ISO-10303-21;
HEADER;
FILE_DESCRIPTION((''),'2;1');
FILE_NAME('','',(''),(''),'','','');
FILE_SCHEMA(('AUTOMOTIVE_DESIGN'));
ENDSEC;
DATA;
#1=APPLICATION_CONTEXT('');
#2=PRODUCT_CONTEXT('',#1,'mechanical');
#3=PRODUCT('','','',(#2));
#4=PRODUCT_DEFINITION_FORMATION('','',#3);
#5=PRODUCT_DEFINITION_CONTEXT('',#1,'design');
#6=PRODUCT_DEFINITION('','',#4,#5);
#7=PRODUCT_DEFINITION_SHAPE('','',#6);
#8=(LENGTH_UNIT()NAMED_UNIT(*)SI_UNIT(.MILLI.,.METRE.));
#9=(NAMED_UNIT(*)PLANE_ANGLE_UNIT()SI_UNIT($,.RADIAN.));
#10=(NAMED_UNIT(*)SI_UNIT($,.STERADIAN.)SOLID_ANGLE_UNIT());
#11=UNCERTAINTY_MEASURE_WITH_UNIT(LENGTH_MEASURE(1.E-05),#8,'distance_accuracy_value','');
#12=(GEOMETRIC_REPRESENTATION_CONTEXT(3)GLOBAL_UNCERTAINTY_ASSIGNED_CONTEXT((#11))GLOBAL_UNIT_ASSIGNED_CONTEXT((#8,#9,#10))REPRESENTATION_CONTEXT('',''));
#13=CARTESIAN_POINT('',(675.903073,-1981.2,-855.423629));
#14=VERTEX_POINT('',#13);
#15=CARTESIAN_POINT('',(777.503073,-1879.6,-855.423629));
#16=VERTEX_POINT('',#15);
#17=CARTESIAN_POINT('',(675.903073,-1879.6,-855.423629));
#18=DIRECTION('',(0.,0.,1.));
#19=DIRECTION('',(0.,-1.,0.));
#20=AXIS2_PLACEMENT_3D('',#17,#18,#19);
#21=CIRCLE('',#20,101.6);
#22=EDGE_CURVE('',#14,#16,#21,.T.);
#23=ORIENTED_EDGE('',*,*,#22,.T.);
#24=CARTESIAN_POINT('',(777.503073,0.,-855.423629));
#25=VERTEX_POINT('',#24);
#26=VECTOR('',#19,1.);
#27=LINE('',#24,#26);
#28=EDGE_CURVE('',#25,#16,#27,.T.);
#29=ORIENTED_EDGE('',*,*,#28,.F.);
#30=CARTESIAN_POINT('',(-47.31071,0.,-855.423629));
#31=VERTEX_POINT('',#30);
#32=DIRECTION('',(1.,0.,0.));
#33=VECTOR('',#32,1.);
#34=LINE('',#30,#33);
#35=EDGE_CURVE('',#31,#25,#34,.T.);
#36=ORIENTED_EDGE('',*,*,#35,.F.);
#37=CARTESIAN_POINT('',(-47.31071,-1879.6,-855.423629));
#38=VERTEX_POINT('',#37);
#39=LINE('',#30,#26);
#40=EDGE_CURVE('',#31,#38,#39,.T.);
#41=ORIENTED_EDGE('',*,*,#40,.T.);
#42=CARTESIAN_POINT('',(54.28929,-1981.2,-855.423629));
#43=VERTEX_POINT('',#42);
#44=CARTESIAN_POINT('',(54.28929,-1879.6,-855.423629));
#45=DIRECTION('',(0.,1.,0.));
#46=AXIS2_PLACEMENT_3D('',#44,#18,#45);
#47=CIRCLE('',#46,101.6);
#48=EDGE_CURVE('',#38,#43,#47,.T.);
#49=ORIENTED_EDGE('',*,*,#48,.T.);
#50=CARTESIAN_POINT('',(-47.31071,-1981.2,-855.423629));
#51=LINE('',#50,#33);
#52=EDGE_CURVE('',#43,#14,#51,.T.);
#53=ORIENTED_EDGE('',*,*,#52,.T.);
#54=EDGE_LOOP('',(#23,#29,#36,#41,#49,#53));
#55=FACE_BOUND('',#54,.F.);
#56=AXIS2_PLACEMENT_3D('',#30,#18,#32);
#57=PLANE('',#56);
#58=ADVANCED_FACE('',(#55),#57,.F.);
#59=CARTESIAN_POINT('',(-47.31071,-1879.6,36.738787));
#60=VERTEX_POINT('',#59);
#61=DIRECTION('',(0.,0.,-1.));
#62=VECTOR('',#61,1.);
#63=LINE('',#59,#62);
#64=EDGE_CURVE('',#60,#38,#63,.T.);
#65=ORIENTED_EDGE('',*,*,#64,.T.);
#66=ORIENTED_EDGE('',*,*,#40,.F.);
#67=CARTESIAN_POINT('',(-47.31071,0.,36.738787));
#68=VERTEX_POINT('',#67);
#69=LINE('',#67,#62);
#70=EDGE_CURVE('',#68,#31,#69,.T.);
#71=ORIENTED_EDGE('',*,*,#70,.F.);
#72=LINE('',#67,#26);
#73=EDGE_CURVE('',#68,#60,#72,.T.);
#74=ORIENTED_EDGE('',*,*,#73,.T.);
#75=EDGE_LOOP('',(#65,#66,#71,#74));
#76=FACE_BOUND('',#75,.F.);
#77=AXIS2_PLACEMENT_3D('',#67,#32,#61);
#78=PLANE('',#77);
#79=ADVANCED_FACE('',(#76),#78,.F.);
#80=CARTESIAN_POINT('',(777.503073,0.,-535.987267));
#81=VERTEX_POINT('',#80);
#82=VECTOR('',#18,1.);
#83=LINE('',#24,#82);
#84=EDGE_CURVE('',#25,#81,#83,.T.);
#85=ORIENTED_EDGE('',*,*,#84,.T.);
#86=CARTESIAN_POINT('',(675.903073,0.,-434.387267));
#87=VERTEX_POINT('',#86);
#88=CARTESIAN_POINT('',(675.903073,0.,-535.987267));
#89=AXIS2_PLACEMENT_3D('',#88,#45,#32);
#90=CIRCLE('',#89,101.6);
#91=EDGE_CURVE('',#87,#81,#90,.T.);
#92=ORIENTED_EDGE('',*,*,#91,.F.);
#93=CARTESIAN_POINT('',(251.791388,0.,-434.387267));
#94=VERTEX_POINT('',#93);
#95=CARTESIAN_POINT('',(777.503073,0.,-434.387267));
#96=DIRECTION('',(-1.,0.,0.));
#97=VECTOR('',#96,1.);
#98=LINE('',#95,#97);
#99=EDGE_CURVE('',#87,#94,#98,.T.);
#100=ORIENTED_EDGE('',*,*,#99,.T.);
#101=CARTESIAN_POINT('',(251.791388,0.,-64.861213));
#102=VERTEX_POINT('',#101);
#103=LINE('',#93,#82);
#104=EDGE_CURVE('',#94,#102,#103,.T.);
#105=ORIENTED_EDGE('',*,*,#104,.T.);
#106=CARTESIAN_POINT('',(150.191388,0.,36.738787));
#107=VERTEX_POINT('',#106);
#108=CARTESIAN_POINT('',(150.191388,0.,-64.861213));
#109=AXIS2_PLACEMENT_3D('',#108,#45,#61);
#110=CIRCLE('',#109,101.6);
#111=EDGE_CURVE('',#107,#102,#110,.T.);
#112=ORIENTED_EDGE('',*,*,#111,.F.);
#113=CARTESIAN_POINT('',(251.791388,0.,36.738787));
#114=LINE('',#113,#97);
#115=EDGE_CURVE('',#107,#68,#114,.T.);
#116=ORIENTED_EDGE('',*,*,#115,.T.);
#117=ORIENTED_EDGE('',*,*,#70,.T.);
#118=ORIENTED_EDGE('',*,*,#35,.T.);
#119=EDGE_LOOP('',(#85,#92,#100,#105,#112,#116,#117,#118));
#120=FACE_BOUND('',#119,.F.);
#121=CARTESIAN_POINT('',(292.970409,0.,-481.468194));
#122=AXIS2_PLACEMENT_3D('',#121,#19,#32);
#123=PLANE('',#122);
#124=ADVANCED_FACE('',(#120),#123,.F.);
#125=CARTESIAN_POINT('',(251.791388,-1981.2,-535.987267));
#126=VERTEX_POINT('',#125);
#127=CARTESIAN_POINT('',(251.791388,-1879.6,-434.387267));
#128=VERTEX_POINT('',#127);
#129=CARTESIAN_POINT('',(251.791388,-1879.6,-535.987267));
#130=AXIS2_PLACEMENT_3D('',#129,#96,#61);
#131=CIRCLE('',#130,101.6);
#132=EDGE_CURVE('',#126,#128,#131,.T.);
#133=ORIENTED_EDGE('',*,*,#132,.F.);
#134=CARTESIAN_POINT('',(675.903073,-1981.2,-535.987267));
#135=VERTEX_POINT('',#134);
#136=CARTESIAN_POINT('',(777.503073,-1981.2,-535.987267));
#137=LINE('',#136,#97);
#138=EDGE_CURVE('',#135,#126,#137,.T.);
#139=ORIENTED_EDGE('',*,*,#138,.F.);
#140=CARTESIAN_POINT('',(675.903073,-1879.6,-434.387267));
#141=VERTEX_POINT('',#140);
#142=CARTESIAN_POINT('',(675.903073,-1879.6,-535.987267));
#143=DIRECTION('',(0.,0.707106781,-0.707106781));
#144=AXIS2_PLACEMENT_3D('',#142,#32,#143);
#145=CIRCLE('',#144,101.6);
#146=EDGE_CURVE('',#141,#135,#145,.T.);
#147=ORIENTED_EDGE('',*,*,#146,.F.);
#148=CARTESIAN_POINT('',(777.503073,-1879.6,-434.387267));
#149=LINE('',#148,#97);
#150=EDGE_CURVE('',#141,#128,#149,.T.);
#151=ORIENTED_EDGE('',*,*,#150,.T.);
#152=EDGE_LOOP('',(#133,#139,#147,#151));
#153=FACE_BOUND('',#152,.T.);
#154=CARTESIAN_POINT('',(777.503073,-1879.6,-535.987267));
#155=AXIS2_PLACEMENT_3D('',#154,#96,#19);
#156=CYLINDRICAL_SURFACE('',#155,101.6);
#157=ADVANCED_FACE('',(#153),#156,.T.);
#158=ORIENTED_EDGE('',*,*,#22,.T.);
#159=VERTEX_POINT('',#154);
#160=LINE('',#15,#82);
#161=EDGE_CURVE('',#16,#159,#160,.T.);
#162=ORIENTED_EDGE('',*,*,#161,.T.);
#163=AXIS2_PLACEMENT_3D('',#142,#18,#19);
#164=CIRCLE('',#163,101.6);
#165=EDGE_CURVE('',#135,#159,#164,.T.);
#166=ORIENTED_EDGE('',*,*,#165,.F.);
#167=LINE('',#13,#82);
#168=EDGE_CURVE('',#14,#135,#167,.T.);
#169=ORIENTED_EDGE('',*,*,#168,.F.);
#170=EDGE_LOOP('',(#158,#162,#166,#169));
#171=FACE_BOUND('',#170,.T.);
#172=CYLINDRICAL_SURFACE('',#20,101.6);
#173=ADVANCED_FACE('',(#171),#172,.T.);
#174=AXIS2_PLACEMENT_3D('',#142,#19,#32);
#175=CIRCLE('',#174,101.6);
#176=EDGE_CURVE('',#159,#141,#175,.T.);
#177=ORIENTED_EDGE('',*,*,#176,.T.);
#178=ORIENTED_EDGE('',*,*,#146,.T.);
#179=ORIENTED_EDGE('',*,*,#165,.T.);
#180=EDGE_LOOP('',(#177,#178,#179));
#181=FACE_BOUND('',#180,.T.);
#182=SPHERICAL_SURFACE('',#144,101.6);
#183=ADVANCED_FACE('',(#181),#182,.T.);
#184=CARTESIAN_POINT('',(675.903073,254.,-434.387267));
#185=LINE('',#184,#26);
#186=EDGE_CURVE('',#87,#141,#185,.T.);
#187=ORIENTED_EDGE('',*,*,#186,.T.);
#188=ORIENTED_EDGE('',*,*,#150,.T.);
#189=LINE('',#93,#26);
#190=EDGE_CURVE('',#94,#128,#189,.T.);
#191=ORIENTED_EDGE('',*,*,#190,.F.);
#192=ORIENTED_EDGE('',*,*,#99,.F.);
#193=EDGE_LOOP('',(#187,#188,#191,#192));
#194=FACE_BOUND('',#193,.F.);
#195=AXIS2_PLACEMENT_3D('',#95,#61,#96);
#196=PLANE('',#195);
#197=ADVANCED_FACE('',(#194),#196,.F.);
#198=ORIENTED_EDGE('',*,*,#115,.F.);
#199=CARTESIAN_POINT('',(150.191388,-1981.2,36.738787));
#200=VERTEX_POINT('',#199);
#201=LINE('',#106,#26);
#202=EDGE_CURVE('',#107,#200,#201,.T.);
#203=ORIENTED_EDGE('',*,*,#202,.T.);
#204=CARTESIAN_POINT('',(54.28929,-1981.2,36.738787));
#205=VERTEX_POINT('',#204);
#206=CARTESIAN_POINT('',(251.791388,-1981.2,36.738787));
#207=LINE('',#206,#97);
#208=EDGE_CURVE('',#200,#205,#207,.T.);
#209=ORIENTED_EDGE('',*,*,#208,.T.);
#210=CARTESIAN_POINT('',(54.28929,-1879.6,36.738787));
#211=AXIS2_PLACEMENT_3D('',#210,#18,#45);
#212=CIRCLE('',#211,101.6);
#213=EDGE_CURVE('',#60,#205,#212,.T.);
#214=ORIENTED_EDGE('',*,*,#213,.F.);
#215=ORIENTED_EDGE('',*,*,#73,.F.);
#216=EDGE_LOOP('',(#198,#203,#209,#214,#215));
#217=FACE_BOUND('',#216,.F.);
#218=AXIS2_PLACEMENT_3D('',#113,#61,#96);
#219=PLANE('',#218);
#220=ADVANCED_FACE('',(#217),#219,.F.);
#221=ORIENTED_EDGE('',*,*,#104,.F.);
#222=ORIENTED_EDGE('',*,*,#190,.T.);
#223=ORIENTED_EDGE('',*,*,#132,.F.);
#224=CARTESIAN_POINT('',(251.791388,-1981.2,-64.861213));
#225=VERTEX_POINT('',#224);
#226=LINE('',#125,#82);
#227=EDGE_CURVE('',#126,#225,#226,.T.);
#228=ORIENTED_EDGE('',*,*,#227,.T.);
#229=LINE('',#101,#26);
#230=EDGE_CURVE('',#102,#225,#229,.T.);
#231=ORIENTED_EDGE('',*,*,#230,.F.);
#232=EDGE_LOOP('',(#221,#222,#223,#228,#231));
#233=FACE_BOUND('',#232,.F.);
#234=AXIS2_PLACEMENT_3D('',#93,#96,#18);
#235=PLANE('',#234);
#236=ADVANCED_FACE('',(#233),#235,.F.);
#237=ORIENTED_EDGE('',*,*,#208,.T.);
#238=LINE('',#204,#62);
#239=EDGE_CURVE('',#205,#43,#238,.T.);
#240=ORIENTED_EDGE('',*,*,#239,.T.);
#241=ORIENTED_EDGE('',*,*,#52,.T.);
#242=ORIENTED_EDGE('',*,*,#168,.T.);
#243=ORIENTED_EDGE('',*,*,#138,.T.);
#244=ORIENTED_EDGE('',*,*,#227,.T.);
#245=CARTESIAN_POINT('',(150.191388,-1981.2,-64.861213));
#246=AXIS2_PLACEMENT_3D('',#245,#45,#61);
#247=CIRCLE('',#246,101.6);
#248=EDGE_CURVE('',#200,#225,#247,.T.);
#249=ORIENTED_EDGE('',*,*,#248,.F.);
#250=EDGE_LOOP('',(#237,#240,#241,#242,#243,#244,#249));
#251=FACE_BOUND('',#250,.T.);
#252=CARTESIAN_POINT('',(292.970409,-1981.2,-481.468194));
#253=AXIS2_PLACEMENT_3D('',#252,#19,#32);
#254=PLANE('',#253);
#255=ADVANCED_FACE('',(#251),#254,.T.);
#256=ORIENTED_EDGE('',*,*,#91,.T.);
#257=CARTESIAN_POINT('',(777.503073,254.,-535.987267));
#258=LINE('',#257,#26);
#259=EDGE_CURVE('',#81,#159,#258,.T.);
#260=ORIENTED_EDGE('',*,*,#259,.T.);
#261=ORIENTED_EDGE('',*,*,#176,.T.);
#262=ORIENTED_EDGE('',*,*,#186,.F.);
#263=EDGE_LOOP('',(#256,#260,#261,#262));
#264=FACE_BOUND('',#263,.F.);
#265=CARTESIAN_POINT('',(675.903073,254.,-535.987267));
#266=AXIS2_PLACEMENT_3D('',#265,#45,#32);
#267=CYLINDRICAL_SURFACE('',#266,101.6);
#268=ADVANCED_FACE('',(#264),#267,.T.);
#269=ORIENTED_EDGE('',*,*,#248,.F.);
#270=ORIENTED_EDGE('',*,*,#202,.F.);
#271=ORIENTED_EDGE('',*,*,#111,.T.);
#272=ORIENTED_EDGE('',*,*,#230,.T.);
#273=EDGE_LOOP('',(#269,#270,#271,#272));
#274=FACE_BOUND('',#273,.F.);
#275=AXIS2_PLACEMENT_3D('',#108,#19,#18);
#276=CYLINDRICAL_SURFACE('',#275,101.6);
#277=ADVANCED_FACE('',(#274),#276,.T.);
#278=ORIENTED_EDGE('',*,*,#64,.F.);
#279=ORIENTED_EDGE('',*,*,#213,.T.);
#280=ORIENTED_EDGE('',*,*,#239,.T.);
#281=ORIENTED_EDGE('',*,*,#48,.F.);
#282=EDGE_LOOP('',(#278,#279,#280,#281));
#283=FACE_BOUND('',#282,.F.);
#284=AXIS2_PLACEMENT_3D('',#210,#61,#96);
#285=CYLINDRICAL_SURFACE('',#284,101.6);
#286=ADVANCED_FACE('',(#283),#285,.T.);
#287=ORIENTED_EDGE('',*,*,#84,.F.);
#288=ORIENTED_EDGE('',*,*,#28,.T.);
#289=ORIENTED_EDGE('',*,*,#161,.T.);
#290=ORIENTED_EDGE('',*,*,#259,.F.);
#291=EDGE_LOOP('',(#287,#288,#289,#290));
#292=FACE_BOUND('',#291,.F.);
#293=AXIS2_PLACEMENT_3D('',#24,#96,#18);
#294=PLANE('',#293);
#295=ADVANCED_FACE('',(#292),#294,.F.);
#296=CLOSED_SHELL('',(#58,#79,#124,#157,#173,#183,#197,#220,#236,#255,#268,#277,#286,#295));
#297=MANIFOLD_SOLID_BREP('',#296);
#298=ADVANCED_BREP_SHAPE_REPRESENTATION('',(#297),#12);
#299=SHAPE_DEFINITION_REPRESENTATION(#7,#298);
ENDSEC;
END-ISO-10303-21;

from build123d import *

# Parameters (mm, degrees)
F1_DEPTH    = 1981.2
F2_R        = 101.6
F3_R        = 101.6
F4_T1_DEPTH = 2133.6
F4_S5_W     = 101.6
F4_S5_H     = 101.6
F4_T6_DEPTH = 101.6


# Not quite as in the source:
# - a fillet or chamfer that OpenCascade refuses, or shapes differently, is made with other operations: its cross-section is extruded or revolved along the edge and cut away or added


with BuildPart() as f1:
    # F0 (on Front) → F1 (new body)
    with BuildSketch(Plane.XZ):
        Polygon((251.7913877964, 36.7387868464), (-47.3107099533, 36.7387868464), (-47.3107099533, -855.4236292839), (777.5030732155, -855.4236292839), (777.5030732155, -434.3872666359), (251.7913877964, -434.3872666359), align=None)
    extrude(amount=F1_DEPTH)

    # F2
    f2_edges = [f1.edges().sort_by_distance(p)[0] for p in [
        (251.791388, -990.6, 36.738787),
        (-47.31071, -1981.2, -409.342421),
    ]]
    fillet(f2_edges, radius=F2_R)

    # F3
    f3_edges = [f1.edges().sort_by_distance(p)[0] for p in [
        (514.647231, -1981.2, -434.387267),
        (777.503073, -1981.2, -644.905448),
    ]]
    fillet(f3_edges, radius=F3_R)

    # F4: fillet of radius 101.6 on 1 edges, made by hand

    # F4_s2 → F4_t1 (cut)
    with BuildSketch(Plane.XZ.offset(-254)):
        with BuildLine():
            ThreePointArc((777.5030732155, -535.9872666359), (747.745122184, -464.1452176673), (675.9030732155, -434.3872666359))
            Line((675.9030732155, -434.3872666359), (777.5030732155, -434.3872666359))
            Line((777.5030732155, -434.3872666359), (777.5030732155, -535.9872666359))
        make_face()
    extrude(amount=F4_T1_DEPTH, mode=Mode.SUBTRACT)


with BuildPart() as f4_tool4:
    # F4_s5 → F4_t6 (new body)
    with BuildSketch(Plane.YZ.offset(675.9030732155)):
        with Locations((-1930.4, -485.1872666359)):
            Rectangle(F4_S5_W, F4_S5_H)
    extrude(amount=F4_T6_DEPTH)

    # F4_s7 → F4_t8 (revolve, cut)
    with BuildSketch(Plane(origin=(675.9030732155, -1879.6, -535.9872666359), x_dir=(0, 0.7071067812, -0.7071067812), z_dir=(0, -0.7071067812, -0.7071067812))):
        with BuildLine():
            ThreePointArc((0, -101.6), (101.6, 0), (0, 101.6))
            Line((0, 101.6), (0, -101.6))
        make_face()
    revolve(axis=Axis((675.9030732155, -1879.6, -535.9872666359), (1, 0, 0)), mode=Mode.SUBTRACT)


with BuildPart() as f1_1:
    add(f1.part)

    # F4_t3: cut F4_tool4
    add(f4_tool4.part, mode=Mode.SUBTRACT)


solid = f1_1.part
